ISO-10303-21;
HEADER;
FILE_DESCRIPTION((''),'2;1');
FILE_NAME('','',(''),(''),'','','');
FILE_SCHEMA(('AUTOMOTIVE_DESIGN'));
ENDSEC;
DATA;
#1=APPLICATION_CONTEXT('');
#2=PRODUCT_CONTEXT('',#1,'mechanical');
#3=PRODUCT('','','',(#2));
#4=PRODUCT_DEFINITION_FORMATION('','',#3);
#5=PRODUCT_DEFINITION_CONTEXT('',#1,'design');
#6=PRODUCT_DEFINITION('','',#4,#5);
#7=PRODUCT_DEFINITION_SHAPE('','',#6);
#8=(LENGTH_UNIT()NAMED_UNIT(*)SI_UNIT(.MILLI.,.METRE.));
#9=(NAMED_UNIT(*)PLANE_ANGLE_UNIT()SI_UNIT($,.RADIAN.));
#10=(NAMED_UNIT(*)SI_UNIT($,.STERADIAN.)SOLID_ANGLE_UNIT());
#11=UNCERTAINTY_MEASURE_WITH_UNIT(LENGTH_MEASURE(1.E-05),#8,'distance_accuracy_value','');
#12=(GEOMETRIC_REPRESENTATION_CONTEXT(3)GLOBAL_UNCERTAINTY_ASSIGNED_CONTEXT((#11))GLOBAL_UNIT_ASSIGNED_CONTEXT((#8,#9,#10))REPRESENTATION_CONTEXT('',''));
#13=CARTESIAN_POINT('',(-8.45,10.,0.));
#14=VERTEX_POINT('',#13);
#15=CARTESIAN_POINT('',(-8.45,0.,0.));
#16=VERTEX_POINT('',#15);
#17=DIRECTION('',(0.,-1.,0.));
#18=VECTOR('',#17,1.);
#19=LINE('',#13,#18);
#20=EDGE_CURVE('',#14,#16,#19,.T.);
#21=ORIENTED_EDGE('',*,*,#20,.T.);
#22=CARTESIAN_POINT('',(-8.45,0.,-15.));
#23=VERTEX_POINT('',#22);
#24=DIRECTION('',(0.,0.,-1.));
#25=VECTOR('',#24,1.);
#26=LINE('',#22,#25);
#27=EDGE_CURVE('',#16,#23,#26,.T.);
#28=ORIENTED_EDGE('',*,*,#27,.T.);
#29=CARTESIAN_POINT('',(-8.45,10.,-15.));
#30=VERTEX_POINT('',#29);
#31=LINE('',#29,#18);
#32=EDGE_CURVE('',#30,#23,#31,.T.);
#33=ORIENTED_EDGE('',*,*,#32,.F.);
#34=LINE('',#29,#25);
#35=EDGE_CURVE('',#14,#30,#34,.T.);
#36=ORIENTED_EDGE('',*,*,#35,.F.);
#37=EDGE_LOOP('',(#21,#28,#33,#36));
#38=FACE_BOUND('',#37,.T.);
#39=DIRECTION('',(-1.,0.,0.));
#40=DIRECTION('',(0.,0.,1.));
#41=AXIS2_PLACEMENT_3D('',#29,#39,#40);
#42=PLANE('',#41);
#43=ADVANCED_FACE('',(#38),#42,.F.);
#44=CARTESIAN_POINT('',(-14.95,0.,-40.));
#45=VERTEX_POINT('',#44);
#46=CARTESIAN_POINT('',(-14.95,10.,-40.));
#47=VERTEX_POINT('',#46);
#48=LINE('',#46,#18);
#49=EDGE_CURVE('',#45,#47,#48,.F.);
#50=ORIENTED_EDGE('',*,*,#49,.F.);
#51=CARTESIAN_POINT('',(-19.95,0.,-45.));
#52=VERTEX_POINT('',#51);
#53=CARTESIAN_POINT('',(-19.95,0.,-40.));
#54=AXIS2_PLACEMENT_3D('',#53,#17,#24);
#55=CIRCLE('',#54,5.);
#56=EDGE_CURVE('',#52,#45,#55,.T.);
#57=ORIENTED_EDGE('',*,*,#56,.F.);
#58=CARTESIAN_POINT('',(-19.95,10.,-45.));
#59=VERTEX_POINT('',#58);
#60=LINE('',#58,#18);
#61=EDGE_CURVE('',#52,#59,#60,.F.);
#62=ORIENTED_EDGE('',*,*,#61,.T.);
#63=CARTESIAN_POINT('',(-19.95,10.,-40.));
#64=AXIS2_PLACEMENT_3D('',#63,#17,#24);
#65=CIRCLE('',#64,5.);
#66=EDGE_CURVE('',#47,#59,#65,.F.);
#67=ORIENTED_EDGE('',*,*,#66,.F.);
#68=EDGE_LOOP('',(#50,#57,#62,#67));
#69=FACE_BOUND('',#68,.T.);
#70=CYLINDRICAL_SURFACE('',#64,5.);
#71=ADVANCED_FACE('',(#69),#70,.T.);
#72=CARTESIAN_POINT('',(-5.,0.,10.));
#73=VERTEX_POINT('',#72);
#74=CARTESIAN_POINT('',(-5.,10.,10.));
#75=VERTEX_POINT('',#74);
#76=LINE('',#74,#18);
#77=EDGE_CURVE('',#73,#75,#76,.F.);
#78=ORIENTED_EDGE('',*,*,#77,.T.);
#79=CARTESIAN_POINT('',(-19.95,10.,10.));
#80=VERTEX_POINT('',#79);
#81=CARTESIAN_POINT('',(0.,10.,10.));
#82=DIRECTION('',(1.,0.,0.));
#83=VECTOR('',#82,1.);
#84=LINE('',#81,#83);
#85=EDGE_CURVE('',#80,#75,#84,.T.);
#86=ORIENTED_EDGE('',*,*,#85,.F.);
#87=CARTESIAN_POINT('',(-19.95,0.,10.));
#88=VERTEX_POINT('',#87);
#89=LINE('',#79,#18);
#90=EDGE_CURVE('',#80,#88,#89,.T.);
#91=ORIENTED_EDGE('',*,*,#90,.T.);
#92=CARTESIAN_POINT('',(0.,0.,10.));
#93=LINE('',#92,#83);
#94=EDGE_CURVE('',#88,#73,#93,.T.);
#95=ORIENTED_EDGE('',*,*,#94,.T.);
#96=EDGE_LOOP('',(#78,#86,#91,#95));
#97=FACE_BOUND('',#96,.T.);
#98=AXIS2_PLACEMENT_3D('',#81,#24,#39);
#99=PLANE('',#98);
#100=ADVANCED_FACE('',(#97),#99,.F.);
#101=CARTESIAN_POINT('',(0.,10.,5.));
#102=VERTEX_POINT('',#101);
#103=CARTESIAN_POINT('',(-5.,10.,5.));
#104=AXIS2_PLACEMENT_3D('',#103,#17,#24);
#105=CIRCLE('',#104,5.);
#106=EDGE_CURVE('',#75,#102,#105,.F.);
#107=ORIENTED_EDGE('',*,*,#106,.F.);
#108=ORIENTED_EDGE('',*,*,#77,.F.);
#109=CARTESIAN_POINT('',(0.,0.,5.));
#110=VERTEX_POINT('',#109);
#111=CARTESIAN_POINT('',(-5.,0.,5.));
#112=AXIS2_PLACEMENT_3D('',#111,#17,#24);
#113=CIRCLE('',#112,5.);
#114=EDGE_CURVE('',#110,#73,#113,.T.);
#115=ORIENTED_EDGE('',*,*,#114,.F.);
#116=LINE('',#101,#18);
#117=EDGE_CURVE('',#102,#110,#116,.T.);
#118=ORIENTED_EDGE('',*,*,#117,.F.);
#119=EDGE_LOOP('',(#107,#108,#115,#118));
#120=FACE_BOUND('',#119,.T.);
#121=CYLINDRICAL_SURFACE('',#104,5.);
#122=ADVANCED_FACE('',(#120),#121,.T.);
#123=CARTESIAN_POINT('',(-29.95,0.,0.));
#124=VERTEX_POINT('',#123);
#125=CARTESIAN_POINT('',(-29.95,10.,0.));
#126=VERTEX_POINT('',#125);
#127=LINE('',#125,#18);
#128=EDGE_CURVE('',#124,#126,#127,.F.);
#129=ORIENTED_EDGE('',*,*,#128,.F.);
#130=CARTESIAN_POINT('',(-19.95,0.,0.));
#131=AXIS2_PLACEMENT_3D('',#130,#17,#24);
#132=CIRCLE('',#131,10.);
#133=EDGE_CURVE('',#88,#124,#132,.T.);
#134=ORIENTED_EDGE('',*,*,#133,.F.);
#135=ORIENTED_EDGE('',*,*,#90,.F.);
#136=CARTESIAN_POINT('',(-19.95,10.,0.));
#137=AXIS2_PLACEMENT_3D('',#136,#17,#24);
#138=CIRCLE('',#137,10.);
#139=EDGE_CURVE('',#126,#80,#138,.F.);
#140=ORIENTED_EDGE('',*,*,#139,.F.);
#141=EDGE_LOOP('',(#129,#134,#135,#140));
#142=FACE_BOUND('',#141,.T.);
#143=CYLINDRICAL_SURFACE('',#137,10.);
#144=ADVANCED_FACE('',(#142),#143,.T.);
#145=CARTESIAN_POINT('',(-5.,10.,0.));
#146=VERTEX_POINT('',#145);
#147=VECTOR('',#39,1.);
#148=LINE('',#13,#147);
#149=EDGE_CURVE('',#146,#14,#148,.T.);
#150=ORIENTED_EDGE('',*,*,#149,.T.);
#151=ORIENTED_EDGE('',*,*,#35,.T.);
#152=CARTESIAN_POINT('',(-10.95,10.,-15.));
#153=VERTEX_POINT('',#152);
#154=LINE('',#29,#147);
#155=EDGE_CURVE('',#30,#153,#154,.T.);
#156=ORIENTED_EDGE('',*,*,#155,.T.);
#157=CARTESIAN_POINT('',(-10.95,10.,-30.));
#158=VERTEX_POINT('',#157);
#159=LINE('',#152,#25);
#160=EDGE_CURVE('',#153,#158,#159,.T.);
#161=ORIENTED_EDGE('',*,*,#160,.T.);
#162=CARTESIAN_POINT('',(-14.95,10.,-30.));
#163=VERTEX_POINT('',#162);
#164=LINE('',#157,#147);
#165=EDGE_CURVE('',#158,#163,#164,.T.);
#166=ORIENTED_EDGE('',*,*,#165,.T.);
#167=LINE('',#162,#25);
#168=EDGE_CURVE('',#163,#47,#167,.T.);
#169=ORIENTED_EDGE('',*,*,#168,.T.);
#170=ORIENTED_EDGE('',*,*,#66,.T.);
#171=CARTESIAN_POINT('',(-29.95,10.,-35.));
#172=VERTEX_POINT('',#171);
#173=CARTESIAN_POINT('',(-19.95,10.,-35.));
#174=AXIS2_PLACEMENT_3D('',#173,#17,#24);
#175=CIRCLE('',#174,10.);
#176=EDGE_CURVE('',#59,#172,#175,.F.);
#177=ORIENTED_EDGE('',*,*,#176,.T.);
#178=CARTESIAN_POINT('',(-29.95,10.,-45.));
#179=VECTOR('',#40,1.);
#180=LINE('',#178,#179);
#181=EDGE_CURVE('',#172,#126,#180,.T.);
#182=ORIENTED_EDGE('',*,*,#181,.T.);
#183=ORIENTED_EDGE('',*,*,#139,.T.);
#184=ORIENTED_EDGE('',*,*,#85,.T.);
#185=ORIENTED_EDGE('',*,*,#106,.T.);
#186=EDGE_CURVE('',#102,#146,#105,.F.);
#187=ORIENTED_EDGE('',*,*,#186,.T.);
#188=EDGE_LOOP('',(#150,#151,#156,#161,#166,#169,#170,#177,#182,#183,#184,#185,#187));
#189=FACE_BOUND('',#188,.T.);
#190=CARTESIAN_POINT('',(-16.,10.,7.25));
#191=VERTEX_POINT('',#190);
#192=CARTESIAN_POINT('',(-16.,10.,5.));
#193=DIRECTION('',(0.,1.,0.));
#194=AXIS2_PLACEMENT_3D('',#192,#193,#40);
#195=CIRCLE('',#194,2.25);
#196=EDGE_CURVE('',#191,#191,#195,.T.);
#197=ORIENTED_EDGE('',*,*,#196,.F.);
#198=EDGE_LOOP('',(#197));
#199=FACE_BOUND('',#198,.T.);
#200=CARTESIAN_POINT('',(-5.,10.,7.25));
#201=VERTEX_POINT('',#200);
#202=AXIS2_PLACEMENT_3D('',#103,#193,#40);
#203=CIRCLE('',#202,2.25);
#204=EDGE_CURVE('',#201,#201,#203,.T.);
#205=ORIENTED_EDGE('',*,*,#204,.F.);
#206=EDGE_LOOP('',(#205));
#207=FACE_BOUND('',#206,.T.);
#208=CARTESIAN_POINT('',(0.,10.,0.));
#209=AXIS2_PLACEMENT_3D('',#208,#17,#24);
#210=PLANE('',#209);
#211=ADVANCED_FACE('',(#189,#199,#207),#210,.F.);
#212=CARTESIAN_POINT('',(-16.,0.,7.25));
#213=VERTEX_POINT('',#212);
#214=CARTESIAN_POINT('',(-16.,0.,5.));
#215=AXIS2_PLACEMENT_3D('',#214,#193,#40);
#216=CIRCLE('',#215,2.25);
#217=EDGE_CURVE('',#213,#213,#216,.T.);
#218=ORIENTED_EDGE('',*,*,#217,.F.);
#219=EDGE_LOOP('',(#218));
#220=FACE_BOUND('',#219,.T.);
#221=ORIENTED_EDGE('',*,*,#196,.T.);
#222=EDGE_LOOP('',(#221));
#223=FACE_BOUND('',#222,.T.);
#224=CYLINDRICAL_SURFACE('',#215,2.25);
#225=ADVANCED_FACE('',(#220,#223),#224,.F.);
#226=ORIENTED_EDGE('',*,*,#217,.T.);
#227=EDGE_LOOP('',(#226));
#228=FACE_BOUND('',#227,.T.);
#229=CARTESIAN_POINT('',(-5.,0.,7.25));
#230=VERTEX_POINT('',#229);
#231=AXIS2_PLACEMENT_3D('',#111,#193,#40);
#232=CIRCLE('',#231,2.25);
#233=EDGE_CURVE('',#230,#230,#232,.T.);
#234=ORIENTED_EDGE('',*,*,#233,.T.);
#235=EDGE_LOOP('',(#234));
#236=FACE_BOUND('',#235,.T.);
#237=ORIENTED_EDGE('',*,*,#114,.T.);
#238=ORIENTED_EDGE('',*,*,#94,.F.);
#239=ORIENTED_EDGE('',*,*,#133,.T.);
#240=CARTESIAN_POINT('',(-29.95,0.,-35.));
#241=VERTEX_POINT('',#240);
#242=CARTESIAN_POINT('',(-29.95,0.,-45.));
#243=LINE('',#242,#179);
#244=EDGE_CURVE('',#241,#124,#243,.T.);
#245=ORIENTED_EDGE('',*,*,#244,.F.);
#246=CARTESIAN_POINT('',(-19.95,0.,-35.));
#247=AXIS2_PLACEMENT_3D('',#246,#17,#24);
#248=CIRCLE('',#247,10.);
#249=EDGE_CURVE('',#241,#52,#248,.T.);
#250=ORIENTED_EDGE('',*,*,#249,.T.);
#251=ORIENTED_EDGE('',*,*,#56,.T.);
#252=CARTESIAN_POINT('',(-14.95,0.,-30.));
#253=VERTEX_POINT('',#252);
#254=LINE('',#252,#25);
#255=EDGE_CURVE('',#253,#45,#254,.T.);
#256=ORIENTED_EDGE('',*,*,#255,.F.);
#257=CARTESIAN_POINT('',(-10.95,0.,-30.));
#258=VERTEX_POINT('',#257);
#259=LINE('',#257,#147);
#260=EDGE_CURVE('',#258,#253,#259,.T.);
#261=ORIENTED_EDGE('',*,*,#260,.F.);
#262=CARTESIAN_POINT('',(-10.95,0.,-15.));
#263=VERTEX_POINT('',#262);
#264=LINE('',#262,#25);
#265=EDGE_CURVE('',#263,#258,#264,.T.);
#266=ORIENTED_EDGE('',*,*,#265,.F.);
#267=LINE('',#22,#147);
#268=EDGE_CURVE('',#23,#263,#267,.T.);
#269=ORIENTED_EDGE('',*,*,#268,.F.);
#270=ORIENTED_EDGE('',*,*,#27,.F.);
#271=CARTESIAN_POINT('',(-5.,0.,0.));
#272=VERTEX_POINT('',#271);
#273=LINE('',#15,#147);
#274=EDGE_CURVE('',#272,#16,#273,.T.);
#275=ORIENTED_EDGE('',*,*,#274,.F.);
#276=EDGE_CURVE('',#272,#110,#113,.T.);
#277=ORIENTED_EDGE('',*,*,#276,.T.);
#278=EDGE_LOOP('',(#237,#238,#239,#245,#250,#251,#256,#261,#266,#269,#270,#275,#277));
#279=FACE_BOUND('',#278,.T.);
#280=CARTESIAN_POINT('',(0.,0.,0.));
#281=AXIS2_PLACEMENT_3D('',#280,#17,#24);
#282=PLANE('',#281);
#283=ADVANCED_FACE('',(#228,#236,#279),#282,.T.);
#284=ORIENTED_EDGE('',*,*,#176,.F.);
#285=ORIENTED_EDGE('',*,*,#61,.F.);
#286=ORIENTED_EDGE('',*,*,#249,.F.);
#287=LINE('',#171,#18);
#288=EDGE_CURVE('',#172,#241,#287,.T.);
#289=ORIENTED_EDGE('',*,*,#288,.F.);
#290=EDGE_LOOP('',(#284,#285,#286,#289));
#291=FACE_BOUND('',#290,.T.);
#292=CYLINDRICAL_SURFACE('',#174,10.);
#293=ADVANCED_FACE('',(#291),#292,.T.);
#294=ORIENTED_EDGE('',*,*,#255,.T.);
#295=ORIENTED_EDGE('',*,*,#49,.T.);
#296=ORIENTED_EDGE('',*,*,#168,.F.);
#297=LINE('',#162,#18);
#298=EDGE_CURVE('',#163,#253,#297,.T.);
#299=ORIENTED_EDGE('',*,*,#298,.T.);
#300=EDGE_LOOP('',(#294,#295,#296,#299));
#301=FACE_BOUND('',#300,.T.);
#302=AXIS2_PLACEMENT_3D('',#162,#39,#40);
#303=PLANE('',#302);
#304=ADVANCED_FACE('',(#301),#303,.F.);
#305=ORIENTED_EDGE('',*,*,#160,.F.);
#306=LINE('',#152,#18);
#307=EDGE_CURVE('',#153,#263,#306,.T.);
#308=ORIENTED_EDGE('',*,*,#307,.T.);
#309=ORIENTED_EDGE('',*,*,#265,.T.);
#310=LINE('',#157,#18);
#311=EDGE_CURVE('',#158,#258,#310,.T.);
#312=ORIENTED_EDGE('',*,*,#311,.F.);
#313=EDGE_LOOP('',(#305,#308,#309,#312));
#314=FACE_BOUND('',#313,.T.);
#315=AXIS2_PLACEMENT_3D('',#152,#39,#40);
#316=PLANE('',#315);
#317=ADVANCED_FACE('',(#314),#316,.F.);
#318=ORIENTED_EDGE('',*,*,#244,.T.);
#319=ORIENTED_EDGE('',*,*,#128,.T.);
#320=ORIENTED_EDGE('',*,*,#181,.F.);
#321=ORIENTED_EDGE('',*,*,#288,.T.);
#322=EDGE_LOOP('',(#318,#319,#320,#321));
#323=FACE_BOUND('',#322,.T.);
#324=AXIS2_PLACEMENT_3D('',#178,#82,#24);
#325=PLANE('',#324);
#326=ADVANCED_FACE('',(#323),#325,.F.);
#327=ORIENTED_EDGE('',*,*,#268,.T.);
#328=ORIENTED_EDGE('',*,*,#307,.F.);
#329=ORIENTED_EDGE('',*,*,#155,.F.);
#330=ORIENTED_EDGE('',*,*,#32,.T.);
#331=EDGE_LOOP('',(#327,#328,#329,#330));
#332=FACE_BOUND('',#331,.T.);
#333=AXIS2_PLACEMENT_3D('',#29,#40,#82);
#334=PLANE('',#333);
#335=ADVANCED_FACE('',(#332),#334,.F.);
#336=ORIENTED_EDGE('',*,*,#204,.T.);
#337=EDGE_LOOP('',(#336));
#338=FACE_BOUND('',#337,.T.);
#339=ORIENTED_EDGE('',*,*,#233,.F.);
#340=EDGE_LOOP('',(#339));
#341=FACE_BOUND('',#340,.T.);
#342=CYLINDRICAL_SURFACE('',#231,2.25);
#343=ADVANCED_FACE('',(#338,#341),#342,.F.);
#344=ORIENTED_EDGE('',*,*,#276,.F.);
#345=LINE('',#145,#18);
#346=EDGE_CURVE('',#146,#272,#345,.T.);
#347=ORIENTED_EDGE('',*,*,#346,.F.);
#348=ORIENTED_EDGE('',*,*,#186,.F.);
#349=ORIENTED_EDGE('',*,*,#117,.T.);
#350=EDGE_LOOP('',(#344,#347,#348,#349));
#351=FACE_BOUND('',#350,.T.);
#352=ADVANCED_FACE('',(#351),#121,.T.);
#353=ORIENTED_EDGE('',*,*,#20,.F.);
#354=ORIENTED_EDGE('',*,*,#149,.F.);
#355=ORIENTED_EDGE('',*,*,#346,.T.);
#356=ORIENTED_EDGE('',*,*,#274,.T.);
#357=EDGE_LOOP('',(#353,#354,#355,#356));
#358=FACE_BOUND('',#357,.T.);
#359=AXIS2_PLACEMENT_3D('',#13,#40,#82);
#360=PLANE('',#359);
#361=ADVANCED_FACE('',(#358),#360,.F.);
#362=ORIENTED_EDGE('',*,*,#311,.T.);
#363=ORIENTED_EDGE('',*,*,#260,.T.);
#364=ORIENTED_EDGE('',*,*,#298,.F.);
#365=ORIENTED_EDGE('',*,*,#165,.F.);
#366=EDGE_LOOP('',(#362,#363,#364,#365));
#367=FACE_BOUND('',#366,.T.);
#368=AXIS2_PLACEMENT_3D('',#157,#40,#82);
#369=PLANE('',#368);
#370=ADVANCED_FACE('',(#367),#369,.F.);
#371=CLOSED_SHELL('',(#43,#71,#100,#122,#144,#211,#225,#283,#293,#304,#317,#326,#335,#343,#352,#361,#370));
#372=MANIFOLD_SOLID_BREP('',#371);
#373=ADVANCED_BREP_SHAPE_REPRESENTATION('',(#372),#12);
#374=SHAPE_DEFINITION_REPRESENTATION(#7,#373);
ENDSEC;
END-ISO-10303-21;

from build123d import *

# Parameters (mm, degrees)
BOSS_EXTRUDE1_DEPTH = 10
SKETCH3_R           = 2.25
CUT_EXTRUDE1_DEPTH  = 10
FILLET1_R           = 10
FILLET2_R           = 5


with BuildPart() as part:
    # Sketch2 → Boss-Extrude1 (new body)
    with BuildSketch(Plane(origin=(0, 0, 0), x_dir=(1, 0, 0), z_dir=(0, 1, 0))):
        Polygon((-8.45, 15), (-8.45, 0), (0, 0), (0, -10), (-29.95, -10), (-29.95, 45), (-14.95, 45), (-14.95, 30), (-10.95, 30), (-10.95, 15), align=None)
    extrude(amount=BOSS_EXTRUDE1_DEPTH)

    # Sketch3 → Cut-Extrude1 (cut)
    with BuildSketch(Plane(origin=(0, 10, 0), x_dir=(1, 0, 0), z_dir=(0, 1, 0))):
        with Locations(Location((-16, -5, 0), (0, 0, 270))):
            Circle(SKETCH3_R)
        with Locations(Location((-5, -5, 0), (0, 0, 270))):
            Circle(SKETCH3_R)
    extrude(amount=-CUT_EXTRUDE1_DEPTH, mode=Mode.SUBTRACT)

    # Fillet1
    fillet1_edges = [part.edges().sort_by_distance(p)[0] for p in [
        (-29.95, 5, 10),
        (-29.95, 5, -45),
    ]]
    fillet(fillet1_edges, radius=FILLET1_R)

    # Fillet2
    fillet2_edges = [part.edges().sort_by_distance(p)[0] for p in [
        (-14.95, 5, -45),
        (0, 5, 0),
        (0, 5, 10),
    ]]
    fillet(fillet2_edges, radius=FILLET2_R - 0.0001)  # a hair under: the kernel refuses the full size


solid = part.part
